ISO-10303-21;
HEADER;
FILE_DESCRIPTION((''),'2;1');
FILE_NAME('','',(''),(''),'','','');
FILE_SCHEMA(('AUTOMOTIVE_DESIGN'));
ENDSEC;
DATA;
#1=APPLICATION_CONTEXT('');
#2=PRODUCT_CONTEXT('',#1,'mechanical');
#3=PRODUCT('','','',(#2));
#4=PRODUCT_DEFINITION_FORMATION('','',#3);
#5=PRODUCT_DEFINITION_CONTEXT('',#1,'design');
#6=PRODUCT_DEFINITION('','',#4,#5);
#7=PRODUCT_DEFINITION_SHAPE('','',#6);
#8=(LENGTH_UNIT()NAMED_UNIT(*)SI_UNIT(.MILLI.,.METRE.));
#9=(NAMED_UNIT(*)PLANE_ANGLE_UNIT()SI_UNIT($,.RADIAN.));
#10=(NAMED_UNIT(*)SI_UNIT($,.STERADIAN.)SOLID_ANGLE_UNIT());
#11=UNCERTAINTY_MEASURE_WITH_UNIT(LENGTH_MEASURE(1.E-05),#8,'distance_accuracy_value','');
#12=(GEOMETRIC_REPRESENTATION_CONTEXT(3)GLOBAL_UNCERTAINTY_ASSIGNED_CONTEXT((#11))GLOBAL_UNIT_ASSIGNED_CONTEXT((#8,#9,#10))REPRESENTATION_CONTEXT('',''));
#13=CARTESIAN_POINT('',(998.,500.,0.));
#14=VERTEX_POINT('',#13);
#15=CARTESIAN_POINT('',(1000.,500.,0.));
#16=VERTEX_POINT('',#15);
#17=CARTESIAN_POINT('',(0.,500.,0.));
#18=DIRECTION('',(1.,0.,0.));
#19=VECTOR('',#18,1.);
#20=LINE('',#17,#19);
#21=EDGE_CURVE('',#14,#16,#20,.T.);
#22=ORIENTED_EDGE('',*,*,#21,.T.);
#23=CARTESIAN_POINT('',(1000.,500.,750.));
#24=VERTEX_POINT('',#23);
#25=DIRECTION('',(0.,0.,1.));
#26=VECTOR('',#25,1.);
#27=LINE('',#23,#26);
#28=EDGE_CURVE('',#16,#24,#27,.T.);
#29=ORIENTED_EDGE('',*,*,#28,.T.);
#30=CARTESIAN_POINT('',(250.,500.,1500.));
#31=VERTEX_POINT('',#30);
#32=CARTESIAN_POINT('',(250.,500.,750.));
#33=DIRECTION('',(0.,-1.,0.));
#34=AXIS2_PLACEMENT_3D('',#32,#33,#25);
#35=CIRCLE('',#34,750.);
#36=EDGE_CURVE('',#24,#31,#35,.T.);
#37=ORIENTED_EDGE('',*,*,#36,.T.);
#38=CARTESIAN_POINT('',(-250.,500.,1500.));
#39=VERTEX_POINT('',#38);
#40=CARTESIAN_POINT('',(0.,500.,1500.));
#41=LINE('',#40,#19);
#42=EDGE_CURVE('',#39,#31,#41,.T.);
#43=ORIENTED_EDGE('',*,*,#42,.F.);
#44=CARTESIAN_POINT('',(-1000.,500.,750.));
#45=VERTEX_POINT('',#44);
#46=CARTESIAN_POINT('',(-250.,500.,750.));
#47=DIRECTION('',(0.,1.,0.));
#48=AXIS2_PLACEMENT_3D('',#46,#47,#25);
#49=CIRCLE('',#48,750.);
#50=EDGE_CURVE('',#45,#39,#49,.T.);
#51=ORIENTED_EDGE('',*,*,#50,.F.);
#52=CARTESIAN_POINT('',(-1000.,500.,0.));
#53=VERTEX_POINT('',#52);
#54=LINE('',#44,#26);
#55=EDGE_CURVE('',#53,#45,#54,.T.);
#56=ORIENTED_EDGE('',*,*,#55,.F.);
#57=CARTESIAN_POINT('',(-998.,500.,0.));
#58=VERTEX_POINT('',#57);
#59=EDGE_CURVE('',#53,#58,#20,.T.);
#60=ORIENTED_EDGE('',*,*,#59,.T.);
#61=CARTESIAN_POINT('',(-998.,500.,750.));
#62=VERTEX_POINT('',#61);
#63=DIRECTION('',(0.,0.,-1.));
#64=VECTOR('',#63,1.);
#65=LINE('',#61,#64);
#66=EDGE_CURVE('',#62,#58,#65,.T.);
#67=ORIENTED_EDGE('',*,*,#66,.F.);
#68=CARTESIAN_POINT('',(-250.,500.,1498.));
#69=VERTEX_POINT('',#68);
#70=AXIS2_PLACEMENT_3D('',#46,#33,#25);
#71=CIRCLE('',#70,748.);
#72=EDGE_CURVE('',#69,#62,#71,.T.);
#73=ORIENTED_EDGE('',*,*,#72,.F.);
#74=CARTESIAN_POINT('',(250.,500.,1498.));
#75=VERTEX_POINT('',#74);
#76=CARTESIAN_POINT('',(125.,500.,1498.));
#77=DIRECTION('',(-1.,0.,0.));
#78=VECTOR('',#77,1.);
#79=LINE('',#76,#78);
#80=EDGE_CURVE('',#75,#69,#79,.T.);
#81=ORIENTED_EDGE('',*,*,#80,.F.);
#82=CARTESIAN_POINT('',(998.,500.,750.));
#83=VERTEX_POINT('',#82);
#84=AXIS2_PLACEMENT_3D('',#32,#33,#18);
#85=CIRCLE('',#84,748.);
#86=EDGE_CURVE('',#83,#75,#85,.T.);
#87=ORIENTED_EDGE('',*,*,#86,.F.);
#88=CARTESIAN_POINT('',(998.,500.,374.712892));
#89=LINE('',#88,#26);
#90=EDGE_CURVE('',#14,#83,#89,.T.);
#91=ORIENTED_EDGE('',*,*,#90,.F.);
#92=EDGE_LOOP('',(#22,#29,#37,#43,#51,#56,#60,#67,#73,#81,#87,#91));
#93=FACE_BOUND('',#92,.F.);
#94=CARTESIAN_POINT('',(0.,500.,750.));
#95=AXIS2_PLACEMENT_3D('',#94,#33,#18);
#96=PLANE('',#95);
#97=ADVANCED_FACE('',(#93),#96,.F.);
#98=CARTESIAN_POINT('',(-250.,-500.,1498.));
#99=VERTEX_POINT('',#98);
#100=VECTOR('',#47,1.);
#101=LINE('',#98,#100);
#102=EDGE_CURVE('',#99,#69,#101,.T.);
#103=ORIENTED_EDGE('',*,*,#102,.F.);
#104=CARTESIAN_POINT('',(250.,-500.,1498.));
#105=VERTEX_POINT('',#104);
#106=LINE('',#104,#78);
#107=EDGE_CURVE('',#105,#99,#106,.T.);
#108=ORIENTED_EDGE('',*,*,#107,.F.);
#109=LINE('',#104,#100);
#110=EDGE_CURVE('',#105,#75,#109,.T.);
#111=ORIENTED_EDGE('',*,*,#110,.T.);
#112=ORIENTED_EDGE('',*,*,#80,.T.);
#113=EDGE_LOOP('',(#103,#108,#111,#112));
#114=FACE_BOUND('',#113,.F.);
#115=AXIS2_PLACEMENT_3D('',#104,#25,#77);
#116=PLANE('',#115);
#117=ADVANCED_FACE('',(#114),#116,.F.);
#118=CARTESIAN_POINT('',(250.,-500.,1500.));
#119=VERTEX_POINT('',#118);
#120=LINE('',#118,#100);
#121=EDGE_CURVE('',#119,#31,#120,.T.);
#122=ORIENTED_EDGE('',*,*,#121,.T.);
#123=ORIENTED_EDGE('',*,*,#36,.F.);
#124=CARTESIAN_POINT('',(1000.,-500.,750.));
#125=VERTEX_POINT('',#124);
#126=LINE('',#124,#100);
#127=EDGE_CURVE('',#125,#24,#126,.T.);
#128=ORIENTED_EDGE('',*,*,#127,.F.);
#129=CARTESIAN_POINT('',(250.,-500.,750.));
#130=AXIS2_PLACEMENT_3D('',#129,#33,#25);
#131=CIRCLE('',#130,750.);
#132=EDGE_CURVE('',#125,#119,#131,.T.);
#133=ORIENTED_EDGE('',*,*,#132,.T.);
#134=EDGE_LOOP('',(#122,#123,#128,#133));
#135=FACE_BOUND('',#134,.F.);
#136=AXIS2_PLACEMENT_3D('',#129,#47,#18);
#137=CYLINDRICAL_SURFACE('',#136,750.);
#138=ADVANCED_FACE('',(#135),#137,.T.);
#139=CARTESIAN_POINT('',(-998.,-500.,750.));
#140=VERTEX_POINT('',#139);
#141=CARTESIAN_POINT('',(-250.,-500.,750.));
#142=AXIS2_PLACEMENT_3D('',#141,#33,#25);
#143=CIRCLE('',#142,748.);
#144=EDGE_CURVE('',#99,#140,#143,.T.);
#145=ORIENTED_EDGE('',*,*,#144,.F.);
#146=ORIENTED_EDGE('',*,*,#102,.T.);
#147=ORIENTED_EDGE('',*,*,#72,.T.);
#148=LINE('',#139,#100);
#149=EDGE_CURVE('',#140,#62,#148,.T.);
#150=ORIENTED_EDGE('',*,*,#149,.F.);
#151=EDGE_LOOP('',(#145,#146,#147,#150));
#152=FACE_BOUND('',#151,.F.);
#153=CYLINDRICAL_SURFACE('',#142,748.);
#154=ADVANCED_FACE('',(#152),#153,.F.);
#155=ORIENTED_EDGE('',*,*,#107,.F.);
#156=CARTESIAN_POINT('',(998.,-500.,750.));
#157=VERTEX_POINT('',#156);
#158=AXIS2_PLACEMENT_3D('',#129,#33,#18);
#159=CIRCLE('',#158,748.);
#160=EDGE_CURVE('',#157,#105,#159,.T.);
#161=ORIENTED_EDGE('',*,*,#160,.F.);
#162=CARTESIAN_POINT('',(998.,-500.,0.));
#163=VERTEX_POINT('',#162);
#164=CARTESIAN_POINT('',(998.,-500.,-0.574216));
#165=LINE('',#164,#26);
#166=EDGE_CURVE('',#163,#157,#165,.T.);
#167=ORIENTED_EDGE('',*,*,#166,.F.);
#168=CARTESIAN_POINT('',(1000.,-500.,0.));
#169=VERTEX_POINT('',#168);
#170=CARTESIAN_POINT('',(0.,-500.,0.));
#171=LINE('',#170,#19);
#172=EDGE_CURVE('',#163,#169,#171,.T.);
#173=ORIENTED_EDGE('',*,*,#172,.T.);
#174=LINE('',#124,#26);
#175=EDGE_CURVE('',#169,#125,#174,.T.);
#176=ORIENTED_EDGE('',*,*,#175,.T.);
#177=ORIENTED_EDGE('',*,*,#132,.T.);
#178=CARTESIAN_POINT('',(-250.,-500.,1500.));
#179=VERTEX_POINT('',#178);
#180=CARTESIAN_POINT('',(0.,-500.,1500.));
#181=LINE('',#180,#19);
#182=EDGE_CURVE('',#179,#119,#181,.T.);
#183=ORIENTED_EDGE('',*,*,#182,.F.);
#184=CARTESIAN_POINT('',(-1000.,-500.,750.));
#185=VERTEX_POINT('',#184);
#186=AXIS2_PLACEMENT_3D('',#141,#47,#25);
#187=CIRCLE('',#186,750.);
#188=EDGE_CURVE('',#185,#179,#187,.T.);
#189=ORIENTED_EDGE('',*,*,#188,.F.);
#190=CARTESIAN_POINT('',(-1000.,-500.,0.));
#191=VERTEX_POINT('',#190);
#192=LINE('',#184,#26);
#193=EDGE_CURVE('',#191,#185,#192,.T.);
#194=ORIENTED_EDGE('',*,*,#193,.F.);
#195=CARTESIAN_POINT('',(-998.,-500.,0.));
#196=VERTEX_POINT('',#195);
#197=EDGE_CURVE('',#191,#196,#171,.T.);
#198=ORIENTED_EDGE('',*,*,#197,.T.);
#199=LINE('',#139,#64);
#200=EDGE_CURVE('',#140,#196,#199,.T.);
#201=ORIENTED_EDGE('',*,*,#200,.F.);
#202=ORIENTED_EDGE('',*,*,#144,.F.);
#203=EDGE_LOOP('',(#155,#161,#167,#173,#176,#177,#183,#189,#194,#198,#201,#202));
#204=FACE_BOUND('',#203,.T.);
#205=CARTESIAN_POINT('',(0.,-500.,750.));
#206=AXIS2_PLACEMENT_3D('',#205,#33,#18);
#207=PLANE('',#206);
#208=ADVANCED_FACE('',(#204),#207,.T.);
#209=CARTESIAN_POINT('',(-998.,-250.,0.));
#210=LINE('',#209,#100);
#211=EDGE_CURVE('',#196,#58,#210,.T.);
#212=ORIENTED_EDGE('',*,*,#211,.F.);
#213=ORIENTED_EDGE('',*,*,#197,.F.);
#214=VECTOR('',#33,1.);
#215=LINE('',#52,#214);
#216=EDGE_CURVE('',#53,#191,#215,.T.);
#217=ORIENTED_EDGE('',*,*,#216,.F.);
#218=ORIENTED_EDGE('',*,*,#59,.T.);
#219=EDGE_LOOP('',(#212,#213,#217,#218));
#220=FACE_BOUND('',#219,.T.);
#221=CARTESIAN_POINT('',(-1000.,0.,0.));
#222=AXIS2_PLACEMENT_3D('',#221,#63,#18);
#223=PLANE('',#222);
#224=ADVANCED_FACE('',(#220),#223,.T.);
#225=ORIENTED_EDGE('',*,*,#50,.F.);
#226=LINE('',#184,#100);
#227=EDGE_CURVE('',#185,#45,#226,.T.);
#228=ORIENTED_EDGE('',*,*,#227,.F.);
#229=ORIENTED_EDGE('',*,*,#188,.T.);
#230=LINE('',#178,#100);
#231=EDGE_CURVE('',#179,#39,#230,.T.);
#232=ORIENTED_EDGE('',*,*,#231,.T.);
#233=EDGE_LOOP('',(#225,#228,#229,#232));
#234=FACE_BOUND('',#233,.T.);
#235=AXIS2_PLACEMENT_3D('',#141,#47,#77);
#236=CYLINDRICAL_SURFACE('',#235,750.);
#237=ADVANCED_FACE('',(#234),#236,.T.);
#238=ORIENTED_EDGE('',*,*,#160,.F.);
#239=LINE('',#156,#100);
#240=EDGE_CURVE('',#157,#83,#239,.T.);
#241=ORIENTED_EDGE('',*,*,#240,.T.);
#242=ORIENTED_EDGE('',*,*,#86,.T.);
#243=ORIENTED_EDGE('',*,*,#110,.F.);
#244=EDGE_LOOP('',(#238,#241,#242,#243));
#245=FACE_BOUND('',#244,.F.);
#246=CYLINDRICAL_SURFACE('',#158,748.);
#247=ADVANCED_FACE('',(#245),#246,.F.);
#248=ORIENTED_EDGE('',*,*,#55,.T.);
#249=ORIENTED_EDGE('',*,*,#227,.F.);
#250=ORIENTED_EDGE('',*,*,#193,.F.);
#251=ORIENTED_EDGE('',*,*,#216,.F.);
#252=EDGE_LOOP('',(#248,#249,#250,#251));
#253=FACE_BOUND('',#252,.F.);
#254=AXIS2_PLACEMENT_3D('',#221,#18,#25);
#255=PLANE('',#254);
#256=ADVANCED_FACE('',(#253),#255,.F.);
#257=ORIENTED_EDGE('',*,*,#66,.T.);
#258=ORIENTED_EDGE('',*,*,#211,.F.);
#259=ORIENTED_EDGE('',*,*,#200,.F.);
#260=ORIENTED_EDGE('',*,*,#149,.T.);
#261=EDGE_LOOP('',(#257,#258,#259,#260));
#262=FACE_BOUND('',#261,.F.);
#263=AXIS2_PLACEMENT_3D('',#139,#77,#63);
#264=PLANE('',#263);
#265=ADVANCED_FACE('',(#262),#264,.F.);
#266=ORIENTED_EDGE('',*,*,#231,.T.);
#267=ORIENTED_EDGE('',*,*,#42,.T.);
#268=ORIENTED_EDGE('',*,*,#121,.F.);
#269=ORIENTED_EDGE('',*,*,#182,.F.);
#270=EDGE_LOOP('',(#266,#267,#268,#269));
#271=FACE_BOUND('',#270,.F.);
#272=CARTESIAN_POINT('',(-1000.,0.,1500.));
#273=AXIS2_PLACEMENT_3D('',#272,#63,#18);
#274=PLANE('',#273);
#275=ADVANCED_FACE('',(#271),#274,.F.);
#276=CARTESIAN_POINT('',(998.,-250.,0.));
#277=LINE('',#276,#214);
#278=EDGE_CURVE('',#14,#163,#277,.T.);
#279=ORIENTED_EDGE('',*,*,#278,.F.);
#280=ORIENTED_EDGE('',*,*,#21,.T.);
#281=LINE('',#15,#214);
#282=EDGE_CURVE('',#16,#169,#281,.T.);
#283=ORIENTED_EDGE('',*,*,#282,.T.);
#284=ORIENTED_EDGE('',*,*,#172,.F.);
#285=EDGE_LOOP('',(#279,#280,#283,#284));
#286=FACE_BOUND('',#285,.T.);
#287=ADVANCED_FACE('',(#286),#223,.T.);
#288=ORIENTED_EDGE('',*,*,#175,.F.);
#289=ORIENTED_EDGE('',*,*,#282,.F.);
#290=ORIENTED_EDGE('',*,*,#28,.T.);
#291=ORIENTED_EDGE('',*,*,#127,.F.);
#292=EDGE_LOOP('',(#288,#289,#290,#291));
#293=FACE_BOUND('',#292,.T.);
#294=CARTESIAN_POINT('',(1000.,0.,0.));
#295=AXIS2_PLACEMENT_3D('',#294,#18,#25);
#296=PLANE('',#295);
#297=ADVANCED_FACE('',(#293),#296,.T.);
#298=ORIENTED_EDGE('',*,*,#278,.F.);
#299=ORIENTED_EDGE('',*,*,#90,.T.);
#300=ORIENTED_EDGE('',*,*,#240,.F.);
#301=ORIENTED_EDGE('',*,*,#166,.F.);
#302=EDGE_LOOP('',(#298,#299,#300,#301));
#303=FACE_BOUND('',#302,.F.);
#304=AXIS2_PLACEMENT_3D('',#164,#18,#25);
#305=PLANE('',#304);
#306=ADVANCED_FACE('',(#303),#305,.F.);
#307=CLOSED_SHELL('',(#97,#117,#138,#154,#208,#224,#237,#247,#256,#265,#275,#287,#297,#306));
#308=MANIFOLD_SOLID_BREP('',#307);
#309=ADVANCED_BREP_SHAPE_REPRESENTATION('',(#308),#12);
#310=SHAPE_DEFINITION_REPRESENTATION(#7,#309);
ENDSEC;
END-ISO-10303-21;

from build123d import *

# Parameters (mm, degrees)
F0_W     = 2000
F0_H     = 1500
F1_DEPTH = 500
F2_R     = 750
F4_DEPTH = 1000.001


# Not quite as in the source:
# - a feature names something its author has since deleted; it is built from what else it names


with BuildPart() as f1:
    # F0 (on Front) → F1 (new body, symmetric)
    with BuildSketch(Plane.XZ):
        with Locations((0, 750)):
            Rectangle(F0_W, F0_H)
    extrude(amount=F1_DEPTH, both=True)

    # F2
    f2_edges = [f1.edges().sort_by_distance(p)[0] for p in [
        (-1000, 0, 1500),
        (1000, 0, 1500),
    ]]
    fillet(f2_edges, radius=F2_R)

    # F3 (on face) → F4 (cut, through all)
    with BuildSketch(Plane.XZ.offset(500)):
        with BuildLine():
            ThreePointArc((-250, 1498), (-778.9158723275, 1278.9158723275), (-998, 750))
            Line((-998, 750), (-998, -0.5737363658))
            Line((-998, -0.5737363658), (998, -0.5742163858))
            Line((998, -0.5742163858), (998, 750))
            ThreePointArc((998, 750), (778.9158723275, 1278.9158723275), (250, 1498))
            Line((250, 1498), (-250, 1498))
        make_face()
    extrude(amount=-F4_DEPTH, mode=Mode.SUBTRACT)


solid = f1.part
